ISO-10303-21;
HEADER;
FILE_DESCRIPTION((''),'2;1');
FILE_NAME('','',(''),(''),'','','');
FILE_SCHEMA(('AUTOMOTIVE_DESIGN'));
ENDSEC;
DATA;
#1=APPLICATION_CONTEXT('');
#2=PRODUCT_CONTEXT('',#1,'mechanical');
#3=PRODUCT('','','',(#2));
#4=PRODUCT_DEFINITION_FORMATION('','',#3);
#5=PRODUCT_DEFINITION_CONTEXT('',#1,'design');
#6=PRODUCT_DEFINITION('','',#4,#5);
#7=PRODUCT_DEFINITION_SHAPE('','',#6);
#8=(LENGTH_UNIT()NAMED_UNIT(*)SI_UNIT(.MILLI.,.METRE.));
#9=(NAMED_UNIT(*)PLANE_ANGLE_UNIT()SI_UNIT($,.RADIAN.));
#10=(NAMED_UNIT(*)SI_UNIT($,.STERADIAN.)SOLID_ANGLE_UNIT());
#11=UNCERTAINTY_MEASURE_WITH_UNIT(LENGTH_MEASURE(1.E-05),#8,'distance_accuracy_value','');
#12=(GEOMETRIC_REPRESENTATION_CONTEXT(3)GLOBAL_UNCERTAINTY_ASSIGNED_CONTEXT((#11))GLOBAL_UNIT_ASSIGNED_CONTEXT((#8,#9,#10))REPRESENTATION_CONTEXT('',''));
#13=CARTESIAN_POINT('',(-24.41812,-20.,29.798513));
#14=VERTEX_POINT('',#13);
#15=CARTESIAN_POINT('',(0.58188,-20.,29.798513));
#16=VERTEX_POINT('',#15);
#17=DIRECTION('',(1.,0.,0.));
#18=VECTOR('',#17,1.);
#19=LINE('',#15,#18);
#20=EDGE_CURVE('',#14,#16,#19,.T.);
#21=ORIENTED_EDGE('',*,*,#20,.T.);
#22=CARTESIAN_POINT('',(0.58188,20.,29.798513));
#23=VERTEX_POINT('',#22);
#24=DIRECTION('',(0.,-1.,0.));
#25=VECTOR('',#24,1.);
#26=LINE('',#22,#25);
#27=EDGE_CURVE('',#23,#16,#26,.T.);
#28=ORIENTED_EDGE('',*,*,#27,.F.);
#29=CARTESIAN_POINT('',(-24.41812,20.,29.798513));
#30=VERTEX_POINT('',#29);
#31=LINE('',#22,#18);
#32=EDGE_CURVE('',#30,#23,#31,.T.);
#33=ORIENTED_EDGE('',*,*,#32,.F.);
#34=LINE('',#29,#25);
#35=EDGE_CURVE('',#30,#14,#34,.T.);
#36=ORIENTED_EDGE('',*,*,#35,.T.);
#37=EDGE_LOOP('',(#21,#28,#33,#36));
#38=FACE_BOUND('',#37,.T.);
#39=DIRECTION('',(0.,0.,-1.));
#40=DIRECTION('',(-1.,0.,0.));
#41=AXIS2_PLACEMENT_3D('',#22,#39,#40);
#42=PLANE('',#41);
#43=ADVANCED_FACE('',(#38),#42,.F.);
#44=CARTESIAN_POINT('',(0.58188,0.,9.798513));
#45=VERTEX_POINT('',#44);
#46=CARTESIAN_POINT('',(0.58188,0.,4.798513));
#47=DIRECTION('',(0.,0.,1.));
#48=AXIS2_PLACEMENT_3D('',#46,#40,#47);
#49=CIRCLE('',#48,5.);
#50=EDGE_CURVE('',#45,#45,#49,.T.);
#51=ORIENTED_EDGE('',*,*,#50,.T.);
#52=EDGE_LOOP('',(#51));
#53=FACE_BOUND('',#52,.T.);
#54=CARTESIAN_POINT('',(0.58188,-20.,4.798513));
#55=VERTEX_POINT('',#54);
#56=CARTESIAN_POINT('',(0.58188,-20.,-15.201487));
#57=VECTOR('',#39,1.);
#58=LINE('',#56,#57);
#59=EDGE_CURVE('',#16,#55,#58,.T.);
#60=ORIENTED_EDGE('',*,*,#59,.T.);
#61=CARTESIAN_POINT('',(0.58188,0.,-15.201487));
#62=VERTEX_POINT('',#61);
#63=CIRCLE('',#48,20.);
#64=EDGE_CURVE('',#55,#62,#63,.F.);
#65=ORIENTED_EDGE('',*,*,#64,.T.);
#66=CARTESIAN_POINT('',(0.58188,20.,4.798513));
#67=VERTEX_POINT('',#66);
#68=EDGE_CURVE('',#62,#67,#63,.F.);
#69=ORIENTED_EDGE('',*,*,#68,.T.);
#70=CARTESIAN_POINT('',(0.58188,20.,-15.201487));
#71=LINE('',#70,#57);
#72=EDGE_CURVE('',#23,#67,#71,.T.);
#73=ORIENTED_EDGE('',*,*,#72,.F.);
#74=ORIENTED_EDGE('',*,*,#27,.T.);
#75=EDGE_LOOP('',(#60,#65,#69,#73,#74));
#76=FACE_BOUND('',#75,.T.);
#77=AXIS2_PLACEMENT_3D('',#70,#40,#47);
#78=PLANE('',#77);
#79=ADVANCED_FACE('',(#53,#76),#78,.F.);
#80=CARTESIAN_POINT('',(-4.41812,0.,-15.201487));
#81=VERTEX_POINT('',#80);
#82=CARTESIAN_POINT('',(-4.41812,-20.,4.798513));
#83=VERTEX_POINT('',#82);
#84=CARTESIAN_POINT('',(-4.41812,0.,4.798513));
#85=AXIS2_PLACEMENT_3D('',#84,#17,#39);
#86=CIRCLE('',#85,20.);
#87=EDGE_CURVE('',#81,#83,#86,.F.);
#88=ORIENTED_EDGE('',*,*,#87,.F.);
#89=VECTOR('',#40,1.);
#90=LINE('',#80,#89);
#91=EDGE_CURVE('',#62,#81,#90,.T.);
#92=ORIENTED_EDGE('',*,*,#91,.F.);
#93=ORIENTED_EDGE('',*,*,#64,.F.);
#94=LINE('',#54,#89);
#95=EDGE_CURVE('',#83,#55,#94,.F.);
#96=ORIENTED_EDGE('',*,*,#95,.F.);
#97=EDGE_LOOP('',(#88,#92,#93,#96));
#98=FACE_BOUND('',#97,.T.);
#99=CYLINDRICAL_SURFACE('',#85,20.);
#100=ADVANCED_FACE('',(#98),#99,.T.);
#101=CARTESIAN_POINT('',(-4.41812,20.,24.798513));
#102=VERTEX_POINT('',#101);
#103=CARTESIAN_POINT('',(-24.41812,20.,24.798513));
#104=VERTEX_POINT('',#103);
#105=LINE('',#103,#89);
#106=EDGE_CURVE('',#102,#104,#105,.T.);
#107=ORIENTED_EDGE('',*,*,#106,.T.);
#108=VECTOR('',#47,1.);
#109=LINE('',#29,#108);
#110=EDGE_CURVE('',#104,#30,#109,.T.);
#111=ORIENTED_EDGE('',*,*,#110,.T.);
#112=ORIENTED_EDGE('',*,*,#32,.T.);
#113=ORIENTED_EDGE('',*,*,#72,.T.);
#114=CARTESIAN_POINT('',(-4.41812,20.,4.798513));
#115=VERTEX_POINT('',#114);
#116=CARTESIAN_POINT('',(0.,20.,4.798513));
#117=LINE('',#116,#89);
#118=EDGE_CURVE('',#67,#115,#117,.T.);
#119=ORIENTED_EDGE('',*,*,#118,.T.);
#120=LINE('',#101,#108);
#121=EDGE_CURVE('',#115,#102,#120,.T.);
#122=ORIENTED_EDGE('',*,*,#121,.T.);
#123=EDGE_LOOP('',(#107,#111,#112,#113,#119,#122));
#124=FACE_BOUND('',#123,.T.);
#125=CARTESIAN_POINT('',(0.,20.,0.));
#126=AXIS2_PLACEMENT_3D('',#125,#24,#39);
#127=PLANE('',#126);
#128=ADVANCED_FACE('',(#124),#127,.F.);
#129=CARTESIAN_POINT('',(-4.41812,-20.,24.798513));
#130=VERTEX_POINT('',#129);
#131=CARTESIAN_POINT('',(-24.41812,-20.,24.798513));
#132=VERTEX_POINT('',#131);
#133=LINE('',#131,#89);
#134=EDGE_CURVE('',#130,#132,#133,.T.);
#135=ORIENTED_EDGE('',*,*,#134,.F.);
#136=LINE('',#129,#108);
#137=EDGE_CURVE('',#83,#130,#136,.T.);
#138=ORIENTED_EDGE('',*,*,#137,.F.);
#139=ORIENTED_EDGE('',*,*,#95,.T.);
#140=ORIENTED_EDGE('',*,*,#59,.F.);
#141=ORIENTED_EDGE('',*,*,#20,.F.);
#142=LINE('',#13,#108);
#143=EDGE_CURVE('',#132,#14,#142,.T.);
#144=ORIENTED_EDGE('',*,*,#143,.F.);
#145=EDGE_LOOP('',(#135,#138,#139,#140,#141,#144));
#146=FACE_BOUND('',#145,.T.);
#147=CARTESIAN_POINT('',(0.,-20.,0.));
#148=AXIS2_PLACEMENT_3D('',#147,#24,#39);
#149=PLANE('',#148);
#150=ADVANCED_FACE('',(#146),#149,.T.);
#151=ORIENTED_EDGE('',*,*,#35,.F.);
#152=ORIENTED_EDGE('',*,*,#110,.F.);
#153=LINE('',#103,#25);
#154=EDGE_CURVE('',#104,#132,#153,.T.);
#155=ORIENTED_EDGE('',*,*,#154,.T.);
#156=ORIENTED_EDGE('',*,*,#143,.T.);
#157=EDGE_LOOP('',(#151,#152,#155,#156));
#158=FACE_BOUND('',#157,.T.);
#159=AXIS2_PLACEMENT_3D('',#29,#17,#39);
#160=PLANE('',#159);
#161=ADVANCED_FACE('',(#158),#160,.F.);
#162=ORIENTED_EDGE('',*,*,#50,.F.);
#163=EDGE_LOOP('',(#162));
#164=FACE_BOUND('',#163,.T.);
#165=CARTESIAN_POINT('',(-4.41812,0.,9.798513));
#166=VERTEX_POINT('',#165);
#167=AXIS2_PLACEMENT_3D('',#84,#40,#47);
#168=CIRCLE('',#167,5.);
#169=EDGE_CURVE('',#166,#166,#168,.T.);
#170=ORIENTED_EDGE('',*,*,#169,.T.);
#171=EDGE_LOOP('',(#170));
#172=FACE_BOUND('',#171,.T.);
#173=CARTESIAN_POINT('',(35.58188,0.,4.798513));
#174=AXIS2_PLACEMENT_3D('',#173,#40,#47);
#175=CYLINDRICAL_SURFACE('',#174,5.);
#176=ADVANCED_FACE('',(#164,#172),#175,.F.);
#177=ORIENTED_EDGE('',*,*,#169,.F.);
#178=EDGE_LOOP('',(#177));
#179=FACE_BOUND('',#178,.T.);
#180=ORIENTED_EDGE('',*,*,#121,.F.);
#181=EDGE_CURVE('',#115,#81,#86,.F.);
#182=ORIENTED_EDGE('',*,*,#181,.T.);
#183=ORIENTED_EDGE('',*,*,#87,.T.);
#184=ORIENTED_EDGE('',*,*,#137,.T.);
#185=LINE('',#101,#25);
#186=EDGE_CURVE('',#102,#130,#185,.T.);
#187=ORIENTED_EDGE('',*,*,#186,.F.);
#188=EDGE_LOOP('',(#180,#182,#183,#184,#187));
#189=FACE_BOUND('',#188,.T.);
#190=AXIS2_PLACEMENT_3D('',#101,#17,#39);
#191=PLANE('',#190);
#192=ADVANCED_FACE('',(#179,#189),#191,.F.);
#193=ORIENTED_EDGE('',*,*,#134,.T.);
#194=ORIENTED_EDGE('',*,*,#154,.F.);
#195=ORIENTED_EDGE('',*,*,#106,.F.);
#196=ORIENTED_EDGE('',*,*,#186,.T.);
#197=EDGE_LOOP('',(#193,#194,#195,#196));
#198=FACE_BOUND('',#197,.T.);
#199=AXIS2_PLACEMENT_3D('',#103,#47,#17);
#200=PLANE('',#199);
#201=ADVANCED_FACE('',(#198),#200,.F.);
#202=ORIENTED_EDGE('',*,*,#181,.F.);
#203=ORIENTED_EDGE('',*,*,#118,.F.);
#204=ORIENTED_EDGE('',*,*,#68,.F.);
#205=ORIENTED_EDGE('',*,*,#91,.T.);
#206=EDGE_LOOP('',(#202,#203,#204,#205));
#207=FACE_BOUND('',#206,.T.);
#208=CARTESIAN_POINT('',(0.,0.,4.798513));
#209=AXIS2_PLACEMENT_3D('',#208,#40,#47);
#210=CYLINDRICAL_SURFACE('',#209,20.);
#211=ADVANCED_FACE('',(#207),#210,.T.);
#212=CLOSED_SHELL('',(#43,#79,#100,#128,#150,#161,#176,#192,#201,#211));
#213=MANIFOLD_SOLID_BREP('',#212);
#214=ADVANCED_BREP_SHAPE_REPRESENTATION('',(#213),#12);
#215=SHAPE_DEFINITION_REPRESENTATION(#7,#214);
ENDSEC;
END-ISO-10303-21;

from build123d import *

# Parameters (mm, degrees)
BOSS_EXTRUDE1_DEPTH = 20
FILLET1_R           = 20
FILLET2_R           = 20
SKETCH2_R           = 5
CUT_EXTRUDE2_DEPTH  = 40


with BuildPart() as part:
    # Sketch1 → Boss-Extrude1 (new, symmetric)
    with BuildSketch(Plane(origin=(0, 0, 0), x_dir=(1, 0, 0), z_dir=(0, 1, 0))):
        Polygon((-4.418120101, 15.201487277), (0.581879899, 15.201487277), (0.581879899, -29.798512723), (-24.418120101, -29.798512723), (-24.418120101, -24.798512723), (-4.418120101, -24.798512723), align=None)
    extrude(amount=BOSS_EXTRUDE1_DEPTH, both=True)

    # Fillet1
    fillet1_edges = [part.edges().sort_by_distance(p)[0] for p in [
        (-1.918120101, -20, -15.201487277),
    ]]
    fillet(fillet1_edges, radius=FILLET1_R)

    # Fillet2
    fillet2_edges = [part.edges().sort_by_distance(p)[0] for p in [
        (-1.918120101, 20, -15.201487277),
    ]]
    fillet(fillet2_edges, radius=FILLET2_R - 0.0001)  # a hair under: the kernel refuses the full size

    # Sketch2 → Cut-Extrude2 (cut)
    with BuildSketch(Plane.ZY.offset(4.418120101)):
        with Locations((4.798512723, 0)):
            Circle(SKETCH2_R)
    extrude(amount=-CUT_EXTRUDE2_DEPTH, mode=Mode.SUBTRACT)


solid = part.part
